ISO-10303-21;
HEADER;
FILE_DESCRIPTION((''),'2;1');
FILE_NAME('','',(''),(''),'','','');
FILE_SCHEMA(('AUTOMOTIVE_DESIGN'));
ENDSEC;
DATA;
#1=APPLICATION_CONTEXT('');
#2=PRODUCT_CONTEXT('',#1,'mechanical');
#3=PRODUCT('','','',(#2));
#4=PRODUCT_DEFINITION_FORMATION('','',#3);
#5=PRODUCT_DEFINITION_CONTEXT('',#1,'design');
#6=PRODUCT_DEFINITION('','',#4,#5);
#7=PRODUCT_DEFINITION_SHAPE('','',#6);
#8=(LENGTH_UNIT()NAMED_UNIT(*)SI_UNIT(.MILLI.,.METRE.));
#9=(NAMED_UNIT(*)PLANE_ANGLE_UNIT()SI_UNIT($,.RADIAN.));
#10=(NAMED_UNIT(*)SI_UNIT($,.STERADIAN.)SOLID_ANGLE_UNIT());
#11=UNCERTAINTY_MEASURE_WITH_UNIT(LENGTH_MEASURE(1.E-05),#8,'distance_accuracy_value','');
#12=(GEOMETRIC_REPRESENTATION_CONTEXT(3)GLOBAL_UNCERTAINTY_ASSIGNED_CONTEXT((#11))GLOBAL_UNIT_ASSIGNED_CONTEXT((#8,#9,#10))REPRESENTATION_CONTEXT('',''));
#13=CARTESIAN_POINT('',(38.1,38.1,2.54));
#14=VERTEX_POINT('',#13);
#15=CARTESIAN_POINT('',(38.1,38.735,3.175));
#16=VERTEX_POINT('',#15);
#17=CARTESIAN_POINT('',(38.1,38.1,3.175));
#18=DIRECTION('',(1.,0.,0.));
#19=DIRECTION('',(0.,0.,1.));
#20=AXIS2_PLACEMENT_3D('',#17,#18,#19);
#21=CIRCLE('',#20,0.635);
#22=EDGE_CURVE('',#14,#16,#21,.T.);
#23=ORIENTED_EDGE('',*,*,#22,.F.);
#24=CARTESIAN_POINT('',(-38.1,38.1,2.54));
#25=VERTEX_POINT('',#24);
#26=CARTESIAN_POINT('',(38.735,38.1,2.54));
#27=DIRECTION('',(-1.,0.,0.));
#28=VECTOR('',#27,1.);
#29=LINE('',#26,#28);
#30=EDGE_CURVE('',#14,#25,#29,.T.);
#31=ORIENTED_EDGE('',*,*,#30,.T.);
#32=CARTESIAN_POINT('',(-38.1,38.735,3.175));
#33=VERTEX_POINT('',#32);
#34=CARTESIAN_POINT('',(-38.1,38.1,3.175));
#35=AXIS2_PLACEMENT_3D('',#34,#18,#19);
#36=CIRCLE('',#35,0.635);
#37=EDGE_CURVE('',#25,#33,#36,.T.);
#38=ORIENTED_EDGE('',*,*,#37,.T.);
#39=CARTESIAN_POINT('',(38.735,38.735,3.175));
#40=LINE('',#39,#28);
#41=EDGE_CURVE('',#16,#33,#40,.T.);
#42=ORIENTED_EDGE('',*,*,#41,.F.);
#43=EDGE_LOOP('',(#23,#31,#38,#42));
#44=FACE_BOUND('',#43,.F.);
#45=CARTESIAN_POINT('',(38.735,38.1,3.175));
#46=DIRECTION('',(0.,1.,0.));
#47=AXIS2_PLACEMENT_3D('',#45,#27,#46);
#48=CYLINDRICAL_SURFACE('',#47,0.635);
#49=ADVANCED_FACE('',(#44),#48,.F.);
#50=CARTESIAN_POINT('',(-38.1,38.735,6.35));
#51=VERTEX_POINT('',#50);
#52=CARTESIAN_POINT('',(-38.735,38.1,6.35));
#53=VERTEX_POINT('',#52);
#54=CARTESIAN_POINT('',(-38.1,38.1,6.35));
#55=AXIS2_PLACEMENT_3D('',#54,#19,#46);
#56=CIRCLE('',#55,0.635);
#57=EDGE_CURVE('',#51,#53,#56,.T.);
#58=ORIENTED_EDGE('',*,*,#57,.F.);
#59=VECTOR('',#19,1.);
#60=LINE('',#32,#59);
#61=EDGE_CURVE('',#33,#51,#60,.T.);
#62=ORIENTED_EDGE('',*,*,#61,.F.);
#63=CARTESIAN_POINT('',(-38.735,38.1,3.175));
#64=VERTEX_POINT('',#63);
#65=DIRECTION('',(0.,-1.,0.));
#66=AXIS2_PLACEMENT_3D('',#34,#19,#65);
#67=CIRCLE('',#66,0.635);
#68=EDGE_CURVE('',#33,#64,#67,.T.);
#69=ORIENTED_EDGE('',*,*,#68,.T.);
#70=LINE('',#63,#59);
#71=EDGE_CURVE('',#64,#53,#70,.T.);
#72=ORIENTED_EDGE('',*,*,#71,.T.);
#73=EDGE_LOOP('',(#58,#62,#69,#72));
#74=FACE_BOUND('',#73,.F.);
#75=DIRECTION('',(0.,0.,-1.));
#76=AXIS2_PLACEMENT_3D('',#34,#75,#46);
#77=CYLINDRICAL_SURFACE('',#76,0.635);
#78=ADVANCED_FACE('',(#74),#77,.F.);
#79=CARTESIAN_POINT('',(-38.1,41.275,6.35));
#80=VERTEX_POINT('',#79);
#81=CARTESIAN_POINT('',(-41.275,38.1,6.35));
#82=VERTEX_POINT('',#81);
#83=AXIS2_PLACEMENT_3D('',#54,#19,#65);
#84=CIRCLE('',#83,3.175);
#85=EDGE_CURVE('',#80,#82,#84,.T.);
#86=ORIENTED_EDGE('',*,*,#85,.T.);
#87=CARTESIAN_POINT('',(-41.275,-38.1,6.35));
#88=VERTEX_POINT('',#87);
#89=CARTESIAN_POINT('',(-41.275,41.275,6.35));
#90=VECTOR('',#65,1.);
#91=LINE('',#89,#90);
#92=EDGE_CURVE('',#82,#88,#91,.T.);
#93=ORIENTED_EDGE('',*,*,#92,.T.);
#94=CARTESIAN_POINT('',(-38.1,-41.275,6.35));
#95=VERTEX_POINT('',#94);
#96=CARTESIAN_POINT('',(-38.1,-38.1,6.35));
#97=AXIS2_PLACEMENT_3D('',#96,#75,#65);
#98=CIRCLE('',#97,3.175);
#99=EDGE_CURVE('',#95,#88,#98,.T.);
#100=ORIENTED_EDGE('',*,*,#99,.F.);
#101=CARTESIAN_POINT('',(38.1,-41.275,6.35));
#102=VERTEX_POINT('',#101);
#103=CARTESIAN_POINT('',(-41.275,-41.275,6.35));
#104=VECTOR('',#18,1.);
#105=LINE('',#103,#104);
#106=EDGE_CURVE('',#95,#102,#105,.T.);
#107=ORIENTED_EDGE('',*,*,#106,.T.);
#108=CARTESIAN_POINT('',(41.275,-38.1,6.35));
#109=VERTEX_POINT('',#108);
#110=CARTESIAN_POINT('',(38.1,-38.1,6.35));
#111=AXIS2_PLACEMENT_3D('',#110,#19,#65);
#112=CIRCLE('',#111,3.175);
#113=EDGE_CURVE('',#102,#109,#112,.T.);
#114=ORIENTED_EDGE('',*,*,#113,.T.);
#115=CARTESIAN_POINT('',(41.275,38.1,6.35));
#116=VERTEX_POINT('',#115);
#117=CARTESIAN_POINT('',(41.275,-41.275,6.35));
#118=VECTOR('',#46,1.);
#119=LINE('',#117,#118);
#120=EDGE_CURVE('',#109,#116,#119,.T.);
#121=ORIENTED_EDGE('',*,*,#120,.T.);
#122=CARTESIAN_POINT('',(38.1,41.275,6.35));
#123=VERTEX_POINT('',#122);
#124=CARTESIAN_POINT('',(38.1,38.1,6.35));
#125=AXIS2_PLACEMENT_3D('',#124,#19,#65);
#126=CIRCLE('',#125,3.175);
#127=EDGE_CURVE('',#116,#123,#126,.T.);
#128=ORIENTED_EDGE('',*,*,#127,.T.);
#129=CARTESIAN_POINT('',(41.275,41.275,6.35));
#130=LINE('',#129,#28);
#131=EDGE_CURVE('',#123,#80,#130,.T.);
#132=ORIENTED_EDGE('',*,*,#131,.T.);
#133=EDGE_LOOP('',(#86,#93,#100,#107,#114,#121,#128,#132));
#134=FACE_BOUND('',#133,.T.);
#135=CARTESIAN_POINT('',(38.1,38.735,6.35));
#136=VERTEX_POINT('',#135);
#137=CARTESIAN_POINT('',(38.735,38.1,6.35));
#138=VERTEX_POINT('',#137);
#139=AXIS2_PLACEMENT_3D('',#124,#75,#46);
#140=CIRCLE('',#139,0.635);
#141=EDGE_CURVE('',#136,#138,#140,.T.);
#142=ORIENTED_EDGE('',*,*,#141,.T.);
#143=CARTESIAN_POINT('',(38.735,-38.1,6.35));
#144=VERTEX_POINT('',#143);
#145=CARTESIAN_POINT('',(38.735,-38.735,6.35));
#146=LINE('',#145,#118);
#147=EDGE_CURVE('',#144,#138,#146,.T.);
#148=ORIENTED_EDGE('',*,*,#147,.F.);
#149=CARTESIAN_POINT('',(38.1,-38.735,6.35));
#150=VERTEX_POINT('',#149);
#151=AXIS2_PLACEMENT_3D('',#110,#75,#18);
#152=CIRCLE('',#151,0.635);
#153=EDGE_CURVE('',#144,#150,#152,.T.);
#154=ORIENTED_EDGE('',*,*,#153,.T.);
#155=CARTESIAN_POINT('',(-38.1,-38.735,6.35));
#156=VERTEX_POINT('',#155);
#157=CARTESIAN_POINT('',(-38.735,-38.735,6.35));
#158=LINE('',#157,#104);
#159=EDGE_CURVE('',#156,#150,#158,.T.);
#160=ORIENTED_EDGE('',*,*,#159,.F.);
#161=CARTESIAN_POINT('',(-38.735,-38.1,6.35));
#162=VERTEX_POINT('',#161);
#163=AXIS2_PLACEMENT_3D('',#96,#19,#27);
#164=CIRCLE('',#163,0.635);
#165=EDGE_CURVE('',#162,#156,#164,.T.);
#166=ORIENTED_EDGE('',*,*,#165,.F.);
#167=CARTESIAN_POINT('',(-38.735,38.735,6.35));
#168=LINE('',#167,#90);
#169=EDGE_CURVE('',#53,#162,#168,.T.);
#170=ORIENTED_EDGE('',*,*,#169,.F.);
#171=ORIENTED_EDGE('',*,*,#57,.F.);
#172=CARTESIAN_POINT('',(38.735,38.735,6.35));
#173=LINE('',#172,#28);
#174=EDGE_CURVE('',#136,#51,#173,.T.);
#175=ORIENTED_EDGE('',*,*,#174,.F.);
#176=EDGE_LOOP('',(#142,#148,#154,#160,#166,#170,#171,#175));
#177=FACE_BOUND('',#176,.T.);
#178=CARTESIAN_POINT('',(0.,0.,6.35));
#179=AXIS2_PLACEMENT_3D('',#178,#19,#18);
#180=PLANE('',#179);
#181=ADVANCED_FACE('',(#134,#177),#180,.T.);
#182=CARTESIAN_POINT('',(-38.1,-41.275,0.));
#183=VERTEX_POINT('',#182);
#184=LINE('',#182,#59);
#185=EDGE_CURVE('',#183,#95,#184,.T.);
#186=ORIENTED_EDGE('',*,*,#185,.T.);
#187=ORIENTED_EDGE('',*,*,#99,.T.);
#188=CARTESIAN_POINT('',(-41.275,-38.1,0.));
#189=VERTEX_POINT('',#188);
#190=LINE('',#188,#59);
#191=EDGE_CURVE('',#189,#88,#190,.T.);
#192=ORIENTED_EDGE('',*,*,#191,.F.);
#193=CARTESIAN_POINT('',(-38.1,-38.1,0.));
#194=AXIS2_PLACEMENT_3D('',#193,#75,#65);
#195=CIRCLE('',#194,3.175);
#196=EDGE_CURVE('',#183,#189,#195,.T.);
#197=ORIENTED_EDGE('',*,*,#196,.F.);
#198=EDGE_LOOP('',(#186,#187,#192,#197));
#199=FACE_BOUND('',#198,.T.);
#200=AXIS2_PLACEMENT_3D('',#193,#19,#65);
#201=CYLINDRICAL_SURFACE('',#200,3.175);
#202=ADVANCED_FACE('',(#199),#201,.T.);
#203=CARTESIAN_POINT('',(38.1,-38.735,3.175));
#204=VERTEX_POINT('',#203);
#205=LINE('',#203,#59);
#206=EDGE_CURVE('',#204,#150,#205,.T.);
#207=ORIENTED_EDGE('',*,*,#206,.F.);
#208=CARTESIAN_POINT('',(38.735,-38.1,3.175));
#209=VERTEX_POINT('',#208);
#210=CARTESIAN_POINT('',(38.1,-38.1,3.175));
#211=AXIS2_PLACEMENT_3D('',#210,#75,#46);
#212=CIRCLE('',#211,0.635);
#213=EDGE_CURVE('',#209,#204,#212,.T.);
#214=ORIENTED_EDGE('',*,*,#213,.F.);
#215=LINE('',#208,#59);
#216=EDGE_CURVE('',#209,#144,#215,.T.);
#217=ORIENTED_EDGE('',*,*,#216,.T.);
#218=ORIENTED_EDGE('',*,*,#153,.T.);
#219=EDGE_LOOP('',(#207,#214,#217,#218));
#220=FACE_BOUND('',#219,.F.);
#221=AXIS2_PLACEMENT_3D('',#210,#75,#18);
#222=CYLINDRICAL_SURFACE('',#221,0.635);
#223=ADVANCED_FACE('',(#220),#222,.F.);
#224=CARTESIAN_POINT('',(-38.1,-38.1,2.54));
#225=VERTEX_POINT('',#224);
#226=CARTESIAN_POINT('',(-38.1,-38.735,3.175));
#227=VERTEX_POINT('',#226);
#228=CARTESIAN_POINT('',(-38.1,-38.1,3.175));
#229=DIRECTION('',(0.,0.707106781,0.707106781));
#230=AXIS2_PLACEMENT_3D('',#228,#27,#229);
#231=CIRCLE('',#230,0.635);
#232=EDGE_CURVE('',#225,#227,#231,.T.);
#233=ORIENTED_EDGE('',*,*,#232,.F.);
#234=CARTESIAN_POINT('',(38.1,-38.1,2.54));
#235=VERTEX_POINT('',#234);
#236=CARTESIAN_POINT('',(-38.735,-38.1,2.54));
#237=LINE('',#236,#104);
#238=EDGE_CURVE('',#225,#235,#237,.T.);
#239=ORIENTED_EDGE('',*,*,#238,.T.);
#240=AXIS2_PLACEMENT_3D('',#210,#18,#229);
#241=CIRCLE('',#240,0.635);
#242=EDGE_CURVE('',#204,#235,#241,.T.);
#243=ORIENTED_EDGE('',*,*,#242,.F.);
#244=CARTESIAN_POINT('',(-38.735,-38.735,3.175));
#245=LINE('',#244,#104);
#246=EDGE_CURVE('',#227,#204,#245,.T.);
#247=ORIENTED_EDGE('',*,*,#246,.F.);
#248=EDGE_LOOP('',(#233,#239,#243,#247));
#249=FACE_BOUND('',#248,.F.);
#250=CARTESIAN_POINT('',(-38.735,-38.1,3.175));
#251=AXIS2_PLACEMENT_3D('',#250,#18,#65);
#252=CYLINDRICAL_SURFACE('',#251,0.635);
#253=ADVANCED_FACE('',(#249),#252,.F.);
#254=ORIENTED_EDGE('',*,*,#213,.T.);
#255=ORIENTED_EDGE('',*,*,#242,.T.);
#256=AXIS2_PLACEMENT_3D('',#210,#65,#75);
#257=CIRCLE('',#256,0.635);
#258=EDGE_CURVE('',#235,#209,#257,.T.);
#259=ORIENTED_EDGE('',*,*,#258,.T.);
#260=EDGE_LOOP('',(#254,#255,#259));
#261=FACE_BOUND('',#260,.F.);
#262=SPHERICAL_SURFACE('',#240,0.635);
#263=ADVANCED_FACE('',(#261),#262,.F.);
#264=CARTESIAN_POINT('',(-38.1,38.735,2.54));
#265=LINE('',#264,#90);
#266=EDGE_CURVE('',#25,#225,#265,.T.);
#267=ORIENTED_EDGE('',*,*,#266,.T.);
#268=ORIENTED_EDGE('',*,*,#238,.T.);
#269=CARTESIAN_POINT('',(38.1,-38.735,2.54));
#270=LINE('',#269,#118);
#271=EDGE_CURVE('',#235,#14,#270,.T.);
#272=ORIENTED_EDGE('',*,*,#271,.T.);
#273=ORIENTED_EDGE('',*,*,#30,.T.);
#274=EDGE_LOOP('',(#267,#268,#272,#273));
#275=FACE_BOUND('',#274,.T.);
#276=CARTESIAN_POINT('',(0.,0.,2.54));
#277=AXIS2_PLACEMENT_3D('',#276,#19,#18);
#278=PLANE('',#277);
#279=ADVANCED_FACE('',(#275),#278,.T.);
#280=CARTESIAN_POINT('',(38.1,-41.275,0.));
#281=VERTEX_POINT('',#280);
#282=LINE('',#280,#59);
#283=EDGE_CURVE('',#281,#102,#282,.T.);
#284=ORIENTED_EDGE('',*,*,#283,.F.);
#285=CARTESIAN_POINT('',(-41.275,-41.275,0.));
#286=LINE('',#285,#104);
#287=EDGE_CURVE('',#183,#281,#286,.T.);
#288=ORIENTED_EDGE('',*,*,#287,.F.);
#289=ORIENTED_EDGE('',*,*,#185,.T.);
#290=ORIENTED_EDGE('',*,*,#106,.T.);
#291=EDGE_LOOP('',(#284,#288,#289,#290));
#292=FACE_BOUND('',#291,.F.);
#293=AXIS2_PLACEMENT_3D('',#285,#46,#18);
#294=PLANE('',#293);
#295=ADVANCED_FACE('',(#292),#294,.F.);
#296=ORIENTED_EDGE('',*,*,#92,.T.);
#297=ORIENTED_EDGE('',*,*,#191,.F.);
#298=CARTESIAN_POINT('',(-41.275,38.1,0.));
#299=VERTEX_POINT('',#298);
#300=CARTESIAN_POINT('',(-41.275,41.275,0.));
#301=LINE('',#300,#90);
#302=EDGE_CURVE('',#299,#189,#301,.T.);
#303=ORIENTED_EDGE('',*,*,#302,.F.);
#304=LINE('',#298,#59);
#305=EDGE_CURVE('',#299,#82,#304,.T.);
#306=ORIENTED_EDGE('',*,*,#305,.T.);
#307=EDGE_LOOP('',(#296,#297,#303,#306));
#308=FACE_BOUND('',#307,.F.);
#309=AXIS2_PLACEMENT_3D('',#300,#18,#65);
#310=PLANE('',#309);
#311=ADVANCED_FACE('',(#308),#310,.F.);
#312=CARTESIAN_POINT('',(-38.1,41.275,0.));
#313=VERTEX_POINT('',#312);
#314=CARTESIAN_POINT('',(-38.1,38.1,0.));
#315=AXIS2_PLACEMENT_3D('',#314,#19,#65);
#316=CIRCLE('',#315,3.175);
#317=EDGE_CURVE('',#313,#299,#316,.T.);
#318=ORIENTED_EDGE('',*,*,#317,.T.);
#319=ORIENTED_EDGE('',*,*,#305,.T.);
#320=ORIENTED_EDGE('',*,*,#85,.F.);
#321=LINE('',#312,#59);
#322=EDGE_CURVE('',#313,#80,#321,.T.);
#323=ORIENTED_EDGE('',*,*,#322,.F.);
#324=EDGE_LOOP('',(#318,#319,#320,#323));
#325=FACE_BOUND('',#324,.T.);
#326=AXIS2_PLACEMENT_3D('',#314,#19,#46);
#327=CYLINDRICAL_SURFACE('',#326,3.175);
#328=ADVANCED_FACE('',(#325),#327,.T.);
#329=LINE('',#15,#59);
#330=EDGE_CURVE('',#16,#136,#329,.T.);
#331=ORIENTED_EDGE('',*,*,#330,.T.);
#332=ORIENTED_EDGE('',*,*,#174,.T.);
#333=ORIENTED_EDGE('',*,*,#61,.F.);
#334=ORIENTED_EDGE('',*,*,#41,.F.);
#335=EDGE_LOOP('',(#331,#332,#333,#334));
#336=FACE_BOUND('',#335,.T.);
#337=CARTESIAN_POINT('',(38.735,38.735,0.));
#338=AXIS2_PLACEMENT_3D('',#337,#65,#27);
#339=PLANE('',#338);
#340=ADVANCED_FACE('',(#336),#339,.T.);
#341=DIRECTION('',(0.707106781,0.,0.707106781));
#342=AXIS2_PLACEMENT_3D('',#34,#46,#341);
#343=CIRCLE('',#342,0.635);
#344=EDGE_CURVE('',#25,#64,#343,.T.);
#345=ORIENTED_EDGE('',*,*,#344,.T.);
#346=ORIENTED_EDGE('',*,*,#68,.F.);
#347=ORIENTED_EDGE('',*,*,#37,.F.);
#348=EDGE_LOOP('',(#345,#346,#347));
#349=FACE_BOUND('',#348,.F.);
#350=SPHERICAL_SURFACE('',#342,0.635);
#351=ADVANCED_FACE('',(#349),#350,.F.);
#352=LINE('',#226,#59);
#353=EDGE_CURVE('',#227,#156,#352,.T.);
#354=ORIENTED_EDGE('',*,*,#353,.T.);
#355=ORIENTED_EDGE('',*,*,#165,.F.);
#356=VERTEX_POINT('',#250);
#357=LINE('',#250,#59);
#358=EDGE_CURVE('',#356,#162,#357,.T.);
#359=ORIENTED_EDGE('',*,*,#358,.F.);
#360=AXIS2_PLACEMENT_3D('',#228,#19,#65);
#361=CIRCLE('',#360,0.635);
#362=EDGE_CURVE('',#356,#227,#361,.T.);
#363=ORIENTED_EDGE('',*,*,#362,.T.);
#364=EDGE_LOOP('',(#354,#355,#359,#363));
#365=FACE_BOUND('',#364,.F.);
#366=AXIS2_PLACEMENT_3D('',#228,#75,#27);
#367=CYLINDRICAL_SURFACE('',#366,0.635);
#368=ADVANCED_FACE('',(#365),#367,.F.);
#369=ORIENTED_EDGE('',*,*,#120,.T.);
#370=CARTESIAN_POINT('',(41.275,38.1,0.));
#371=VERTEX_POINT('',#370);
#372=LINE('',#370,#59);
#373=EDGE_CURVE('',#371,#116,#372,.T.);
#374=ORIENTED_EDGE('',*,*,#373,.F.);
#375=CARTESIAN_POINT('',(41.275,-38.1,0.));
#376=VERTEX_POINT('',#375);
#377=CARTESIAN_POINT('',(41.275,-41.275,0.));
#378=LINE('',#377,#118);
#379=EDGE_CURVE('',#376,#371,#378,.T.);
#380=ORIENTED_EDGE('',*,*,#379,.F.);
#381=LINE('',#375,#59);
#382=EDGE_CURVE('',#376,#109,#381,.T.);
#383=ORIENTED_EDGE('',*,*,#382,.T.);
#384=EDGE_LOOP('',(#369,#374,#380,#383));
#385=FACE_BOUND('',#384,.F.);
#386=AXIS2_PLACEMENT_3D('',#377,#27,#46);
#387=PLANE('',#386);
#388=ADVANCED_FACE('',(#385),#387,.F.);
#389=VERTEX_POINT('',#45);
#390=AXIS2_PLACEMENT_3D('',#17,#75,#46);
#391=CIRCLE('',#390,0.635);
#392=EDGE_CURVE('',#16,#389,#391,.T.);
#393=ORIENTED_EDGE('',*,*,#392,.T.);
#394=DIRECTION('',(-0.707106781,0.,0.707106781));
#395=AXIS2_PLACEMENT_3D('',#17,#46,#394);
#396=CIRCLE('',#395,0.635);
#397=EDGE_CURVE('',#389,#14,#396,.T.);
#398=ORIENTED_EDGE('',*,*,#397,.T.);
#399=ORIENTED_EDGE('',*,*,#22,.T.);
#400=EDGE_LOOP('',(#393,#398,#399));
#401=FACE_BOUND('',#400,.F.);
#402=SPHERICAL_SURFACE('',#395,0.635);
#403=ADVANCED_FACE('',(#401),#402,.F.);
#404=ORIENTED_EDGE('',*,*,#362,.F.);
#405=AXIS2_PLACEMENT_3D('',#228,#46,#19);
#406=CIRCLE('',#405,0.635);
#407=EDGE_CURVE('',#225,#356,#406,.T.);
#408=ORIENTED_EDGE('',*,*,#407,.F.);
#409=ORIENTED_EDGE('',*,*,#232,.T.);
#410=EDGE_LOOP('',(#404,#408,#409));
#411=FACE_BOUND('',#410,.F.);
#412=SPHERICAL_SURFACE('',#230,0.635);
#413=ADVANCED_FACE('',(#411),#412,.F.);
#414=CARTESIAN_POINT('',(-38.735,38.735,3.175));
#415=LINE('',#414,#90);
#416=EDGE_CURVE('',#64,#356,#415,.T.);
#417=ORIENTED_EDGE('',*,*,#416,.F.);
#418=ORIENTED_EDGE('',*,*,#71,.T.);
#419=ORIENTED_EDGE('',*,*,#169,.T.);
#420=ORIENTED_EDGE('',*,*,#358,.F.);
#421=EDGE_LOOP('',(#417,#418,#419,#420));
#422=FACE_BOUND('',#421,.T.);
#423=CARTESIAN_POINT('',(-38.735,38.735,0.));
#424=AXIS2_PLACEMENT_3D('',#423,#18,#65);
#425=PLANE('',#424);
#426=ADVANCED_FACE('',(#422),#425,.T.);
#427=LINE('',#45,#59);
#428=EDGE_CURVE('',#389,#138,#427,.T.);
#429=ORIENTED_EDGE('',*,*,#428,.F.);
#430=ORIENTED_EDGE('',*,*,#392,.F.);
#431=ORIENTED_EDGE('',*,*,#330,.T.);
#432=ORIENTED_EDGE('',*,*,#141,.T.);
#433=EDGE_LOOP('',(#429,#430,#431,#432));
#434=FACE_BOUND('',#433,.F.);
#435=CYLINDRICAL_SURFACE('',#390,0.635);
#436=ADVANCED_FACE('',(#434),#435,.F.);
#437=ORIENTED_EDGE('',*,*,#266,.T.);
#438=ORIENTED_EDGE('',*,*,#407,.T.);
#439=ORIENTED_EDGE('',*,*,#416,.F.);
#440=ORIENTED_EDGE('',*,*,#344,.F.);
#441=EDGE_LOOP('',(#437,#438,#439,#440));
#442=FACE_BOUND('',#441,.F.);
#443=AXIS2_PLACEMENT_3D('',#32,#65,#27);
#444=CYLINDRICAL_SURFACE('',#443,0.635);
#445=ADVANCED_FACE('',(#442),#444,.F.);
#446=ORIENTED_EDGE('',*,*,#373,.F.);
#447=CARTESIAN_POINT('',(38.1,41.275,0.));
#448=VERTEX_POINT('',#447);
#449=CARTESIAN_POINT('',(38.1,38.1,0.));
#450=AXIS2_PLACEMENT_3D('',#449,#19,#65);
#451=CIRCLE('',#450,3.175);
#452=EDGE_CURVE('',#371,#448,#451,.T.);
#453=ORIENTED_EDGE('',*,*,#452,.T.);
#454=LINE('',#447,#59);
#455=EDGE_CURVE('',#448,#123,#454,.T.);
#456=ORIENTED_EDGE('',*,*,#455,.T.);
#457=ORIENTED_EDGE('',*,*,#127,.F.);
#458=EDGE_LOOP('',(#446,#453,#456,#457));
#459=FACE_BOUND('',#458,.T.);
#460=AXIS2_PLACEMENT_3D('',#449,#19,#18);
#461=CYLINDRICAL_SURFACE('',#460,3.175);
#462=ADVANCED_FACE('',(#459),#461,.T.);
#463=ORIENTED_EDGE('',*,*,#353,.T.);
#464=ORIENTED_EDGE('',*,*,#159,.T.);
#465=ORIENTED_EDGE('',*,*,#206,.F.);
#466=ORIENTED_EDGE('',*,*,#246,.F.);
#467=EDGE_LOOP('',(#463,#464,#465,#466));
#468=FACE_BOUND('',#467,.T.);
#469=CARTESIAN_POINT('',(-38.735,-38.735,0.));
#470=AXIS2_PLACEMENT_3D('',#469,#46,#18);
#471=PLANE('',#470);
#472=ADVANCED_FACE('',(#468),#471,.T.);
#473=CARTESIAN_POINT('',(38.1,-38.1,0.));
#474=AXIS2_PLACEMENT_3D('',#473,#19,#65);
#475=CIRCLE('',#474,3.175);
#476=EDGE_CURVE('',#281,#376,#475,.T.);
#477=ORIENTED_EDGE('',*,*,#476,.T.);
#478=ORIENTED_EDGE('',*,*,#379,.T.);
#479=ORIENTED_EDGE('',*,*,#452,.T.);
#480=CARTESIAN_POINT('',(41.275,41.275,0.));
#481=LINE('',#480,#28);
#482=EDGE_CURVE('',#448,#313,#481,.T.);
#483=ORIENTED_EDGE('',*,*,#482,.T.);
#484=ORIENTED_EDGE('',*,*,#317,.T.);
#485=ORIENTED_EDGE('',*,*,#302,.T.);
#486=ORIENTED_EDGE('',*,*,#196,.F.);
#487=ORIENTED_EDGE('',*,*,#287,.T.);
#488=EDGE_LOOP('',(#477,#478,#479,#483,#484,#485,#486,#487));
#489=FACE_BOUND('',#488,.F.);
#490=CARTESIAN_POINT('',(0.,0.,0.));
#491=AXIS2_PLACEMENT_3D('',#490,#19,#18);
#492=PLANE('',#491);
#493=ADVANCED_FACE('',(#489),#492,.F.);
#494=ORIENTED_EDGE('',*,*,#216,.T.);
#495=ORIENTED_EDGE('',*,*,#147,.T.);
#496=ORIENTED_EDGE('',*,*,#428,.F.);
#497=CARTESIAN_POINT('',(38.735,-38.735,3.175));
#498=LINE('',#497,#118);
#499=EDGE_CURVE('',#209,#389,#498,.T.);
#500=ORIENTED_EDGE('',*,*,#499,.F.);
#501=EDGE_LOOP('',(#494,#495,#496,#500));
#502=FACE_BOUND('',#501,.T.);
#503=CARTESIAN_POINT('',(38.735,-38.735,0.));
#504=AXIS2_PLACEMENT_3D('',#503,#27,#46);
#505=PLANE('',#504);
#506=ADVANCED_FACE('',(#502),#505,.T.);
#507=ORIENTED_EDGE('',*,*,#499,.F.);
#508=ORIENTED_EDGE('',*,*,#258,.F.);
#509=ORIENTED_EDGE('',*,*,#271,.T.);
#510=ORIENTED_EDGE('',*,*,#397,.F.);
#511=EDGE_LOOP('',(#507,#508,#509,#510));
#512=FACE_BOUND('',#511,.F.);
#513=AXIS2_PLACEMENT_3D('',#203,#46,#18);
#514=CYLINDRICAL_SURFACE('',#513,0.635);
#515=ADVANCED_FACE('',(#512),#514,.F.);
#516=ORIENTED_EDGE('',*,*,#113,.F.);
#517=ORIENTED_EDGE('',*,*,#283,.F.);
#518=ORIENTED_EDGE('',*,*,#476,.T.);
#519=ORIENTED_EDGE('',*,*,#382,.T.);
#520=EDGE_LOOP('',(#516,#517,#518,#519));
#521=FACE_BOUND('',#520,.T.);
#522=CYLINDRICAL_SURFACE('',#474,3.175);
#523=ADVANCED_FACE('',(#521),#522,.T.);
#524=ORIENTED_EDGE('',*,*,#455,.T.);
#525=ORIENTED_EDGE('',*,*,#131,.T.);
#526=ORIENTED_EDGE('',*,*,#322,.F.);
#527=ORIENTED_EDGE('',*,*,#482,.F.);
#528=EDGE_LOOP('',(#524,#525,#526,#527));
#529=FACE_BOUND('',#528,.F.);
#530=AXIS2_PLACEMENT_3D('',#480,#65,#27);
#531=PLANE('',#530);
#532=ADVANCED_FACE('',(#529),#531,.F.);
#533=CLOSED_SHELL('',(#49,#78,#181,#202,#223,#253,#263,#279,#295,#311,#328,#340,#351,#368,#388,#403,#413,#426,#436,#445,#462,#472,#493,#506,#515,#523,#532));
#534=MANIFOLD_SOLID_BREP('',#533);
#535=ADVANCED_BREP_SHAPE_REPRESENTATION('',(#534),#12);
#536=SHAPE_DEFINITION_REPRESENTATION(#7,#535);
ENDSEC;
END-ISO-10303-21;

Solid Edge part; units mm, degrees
sketch "Sketch1" plane through (0, 0, 0) normal (0, 0, 1) x (1, 0, 0)
  line L0 (-38.735, -38.735) -> (38.735, -38.735)
  line L1 (38.735, -38.735) -> (38.735, 38.735)
  line L2 (38.735, 38.735) -> (-38.735, 38.735)
  line L3 (-38.735, 38.735) -> (-38.735, -38.735)
extrude "Protrusion1" add sketch "Sketch1" along normal blind 2.54
sketch "Sketch2" plane through (0, 0, 0) normal (0, 0, 1) x (1, 0, 0)
  line L0 (-41.275, -41.275) -> (41.275, -41.275)
  line L1 (41.275, -41.275) -> (41.275, 41.275)
  line L2 (41.275, 41.275) -> (-41.275, 41.275)
  line L3 (-41.275, 41.275) -> (-41.275, -41.275)
  line L4 (-38.735, -38.735) -> (38.735, -38.735)
  line L5 (38.735, -38.735) -> (38.735, 38.735)
  line L6 (38.735, 38.735) -> (-38.735, 38.735)
  line L7 (-38.735, 38.735) -> (-38.735, -38.735)
  dimension "D1" = 77.47
  dimension "D2" = 77.47
  dimension "D3" = 2.54
extrude "ExtrudedProtrusion_2" add sketch "Sketch2" along normal blind 6.35
fillet "Round_1" radius 3.175 4 edges at (41.275, -41.275, 3.175) (41.275, 41.275, 3.175) (-41.275, 41.275, 3.175) (-41.275, -41.275, 3.175)
fillet "Round_2" radius 0.635 4 edges at (-38.735, 0, 2.54) (0, -38.735, 2.54) (38.735, 0, 2.54) (0, 38.735, 2.54)
fillet "Round_3" radius 0.635 8 edges at (-38.735, 38.735, 4.7625) (-38.549, 38.549, 2.726) (-38.549, -38.549, 2.726) (-38.735, -38.735, 4.7625) (38.735, -38.735, 4.7625) (38.549, -38.549, 2.726) (38.735, 38.735, 4.7625) (38.549, 38.549, 2.726)
